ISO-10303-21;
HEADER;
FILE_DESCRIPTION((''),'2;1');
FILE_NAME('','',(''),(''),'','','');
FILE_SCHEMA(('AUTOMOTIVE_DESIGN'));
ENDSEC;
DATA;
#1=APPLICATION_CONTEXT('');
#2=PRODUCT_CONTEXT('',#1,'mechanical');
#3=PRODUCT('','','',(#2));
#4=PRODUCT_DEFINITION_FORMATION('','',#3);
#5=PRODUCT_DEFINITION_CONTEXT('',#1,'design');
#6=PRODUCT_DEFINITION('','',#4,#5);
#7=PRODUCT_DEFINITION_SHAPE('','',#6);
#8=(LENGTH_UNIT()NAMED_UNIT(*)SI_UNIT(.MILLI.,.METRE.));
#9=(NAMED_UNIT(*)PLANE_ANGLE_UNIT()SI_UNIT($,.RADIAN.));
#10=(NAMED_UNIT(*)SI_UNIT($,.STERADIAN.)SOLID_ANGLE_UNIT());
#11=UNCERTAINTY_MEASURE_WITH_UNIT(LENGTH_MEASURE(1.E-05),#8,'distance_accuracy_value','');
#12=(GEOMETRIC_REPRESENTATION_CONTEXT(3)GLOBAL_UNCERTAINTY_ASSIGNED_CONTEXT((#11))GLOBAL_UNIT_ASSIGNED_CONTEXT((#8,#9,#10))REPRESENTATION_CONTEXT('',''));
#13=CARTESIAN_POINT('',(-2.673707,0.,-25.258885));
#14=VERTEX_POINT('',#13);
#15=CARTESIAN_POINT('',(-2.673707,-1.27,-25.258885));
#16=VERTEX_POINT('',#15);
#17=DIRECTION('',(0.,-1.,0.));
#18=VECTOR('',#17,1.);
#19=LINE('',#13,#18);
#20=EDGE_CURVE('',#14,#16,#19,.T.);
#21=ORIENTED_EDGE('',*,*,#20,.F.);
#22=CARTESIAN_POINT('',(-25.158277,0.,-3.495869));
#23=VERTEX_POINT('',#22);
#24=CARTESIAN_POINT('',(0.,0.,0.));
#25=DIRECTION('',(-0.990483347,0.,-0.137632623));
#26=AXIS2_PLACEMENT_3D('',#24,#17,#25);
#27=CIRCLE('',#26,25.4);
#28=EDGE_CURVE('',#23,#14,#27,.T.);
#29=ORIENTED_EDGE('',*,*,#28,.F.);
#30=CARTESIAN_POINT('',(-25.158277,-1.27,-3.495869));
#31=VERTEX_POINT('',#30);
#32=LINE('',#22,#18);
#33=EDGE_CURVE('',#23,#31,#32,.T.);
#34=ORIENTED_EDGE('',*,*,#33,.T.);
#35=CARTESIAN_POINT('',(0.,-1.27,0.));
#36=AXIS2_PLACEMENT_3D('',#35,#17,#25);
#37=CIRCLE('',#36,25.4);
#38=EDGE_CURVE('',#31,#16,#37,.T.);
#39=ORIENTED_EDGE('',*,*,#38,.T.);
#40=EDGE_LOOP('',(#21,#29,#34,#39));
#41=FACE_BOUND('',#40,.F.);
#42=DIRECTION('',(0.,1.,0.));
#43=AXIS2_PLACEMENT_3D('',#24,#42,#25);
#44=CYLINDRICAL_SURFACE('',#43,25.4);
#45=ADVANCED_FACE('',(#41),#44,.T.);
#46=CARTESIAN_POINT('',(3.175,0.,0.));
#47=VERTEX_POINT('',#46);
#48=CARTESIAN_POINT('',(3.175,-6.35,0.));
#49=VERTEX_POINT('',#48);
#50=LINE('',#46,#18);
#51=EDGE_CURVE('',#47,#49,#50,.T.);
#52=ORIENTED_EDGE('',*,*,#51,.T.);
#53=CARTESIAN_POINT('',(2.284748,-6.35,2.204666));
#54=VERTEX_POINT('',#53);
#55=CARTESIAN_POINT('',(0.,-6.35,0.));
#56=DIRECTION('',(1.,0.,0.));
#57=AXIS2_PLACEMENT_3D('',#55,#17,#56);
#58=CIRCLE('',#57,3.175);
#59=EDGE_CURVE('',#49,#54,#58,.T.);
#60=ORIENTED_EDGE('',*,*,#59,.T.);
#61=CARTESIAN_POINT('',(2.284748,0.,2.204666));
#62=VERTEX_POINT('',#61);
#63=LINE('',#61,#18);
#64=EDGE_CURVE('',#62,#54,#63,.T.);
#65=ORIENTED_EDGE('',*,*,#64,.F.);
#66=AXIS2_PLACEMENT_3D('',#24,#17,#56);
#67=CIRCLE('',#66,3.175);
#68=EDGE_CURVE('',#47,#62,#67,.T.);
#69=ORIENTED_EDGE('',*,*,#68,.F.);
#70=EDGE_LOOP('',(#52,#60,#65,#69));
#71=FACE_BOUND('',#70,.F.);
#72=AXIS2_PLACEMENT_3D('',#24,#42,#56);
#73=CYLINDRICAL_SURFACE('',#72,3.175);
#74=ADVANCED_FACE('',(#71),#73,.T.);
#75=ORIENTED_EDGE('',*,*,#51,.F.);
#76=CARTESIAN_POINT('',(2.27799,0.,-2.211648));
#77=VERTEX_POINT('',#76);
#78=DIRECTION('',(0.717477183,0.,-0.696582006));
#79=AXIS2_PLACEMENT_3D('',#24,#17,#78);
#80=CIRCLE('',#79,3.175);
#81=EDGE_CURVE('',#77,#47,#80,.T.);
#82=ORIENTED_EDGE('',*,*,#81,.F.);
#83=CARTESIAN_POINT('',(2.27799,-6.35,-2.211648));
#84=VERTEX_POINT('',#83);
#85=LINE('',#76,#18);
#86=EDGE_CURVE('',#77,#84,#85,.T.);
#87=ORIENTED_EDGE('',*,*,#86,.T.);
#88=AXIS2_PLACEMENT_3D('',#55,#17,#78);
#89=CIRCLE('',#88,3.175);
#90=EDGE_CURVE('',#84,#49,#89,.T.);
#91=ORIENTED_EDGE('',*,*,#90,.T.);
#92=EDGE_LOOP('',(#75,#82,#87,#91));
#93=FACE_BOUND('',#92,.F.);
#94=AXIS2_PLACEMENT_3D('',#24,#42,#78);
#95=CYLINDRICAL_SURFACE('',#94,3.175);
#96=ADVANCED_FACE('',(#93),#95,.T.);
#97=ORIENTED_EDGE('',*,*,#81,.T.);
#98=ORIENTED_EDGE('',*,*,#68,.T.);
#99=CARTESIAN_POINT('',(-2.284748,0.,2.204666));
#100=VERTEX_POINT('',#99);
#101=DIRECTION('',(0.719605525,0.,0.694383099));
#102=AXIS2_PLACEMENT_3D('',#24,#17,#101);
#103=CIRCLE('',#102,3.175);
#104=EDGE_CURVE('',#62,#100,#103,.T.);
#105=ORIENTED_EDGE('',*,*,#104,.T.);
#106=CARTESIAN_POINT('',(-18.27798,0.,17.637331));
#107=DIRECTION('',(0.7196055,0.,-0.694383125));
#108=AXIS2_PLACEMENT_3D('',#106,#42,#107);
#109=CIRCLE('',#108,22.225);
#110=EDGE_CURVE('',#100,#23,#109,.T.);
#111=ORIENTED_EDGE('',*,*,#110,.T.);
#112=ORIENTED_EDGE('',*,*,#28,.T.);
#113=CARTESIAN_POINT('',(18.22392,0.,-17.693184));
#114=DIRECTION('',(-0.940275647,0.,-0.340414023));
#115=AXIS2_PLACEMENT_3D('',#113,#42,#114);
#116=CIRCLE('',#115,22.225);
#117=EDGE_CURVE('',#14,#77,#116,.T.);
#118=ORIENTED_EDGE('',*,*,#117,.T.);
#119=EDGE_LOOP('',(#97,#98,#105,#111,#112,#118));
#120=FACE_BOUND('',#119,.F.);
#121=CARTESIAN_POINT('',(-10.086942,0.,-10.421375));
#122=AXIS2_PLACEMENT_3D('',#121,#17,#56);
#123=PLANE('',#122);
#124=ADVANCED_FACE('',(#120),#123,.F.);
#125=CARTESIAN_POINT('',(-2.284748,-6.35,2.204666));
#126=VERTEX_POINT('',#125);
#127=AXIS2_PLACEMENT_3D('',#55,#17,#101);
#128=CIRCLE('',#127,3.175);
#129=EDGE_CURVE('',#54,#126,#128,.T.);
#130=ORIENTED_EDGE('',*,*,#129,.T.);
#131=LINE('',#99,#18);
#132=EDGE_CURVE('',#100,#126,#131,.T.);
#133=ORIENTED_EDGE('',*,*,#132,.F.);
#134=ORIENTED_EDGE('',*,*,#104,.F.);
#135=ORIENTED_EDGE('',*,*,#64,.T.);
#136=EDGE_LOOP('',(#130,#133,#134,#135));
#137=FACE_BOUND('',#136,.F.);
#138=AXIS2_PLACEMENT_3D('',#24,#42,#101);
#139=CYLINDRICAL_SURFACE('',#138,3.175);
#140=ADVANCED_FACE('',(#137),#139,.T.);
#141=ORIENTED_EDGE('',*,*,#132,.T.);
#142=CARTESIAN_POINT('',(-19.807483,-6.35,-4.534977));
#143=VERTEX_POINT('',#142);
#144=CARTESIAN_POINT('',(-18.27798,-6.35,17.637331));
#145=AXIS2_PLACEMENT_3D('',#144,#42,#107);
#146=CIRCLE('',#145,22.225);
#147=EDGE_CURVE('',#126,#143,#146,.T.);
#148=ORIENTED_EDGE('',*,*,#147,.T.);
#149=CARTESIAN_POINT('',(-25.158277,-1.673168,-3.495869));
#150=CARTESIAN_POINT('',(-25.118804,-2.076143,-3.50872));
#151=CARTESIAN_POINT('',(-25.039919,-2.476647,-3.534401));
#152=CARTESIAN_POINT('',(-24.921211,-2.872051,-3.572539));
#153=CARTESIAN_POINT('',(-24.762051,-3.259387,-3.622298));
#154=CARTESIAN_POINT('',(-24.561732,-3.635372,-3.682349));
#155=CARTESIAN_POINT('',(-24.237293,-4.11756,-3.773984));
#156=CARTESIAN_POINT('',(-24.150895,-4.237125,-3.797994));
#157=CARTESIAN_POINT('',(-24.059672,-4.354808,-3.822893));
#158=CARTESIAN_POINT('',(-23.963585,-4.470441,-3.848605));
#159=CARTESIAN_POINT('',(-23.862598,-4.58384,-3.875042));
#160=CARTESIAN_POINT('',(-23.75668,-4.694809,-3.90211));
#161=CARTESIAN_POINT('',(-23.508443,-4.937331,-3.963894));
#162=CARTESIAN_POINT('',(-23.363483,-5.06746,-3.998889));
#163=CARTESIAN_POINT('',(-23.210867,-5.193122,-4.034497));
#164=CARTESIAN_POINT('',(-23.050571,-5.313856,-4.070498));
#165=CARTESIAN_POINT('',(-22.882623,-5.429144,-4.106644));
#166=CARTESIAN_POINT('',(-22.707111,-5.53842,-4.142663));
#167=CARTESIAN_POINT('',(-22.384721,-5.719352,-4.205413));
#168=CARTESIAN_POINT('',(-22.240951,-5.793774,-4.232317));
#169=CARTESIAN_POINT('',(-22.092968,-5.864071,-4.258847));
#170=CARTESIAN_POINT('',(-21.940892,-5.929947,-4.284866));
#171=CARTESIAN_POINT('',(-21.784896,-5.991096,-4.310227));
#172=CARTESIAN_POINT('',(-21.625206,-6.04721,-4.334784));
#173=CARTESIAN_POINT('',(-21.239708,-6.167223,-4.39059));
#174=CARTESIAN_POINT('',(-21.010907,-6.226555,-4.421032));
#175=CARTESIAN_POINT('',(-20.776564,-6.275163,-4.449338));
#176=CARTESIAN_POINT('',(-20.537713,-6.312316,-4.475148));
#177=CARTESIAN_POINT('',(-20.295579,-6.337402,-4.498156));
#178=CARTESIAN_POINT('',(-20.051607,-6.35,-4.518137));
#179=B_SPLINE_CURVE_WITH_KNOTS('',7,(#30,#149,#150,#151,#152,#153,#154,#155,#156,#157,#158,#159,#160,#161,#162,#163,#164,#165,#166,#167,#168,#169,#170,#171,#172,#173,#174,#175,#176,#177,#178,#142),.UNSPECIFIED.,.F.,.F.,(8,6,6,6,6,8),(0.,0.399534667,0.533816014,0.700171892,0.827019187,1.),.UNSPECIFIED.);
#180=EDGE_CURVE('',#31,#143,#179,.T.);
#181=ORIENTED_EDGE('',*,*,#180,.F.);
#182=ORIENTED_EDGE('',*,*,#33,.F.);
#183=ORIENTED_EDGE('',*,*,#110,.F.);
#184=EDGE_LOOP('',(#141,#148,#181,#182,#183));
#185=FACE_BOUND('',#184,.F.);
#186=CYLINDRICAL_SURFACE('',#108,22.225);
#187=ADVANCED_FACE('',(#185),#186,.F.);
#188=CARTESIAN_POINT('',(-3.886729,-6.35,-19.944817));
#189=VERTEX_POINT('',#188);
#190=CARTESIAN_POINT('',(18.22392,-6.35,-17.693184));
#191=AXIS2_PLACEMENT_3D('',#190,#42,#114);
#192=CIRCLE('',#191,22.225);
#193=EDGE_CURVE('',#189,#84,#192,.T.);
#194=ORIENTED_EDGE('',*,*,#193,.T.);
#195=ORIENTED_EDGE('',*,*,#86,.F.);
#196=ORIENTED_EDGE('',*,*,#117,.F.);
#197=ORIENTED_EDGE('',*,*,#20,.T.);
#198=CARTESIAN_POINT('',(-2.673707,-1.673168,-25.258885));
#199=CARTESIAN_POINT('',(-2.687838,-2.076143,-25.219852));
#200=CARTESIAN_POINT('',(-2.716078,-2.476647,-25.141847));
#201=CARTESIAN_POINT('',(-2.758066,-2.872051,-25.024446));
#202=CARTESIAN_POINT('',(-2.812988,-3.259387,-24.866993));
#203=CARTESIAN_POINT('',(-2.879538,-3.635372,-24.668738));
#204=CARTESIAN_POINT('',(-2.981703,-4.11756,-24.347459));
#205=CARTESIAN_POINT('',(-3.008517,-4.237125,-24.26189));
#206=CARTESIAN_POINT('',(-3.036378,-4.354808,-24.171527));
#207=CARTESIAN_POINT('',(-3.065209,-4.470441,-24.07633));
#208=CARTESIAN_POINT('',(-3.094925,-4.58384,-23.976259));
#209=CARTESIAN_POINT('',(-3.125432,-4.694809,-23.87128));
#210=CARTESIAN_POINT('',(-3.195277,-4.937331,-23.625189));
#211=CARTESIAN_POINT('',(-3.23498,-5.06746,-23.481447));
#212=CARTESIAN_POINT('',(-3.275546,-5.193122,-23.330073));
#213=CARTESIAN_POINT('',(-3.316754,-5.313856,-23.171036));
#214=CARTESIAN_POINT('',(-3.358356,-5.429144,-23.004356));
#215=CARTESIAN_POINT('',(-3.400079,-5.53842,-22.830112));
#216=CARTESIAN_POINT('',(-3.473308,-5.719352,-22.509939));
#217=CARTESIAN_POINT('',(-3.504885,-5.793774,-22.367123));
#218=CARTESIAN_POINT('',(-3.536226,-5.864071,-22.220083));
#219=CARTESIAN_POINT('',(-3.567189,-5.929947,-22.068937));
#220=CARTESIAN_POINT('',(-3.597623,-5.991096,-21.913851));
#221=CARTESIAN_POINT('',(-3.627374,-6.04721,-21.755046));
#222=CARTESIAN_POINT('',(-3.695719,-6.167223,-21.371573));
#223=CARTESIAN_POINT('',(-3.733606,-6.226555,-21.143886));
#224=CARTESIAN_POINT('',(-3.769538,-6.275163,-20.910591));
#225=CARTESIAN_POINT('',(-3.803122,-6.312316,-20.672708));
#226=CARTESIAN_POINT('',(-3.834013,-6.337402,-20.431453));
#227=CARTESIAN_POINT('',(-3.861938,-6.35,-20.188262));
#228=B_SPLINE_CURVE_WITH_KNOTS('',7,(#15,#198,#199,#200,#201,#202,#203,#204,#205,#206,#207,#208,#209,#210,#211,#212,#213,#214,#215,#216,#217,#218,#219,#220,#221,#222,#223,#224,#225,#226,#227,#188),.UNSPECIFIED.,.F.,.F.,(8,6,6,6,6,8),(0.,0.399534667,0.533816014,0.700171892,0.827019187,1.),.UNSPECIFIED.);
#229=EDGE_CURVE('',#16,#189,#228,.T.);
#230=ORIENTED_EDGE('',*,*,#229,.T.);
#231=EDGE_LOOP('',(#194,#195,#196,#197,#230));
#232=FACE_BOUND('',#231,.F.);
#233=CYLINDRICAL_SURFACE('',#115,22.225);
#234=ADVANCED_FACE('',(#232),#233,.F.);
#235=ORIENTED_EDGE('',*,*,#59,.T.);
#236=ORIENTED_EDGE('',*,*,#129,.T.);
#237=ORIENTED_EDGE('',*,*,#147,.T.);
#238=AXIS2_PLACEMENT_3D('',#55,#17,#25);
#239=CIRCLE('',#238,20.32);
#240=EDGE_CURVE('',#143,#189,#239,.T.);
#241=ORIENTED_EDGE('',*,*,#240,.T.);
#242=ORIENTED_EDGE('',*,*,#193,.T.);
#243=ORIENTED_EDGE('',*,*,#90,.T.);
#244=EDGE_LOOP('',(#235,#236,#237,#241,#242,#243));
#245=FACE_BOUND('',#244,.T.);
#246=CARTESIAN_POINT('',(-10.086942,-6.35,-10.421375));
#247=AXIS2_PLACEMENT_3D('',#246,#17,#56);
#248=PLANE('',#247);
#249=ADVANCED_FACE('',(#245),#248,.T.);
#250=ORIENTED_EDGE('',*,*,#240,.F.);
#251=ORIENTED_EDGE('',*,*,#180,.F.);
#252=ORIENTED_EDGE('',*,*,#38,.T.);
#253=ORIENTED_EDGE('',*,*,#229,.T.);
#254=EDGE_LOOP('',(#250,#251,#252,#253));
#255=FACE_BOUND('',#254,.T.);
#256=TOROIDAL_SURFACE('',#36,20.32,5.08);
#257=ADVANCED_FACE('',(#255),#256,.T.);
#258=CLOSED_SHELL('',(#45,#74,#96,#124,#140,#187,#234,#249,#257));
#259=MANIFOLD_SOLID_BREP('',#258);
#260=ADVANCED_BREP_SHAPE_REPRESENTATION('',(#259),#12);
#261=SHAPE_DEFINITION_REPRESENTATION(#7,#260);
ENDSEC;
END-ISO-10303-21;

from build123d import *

# Parameters (mm, degrees)
F1_DEPTH = 6.35
F2_R     = 5.08


with BuildPart() as f1:
    # F0 (on Front) → F1 (new body)
    with BuildSketch(Plane.XZ):
        with BuildLine():
            ThreePointArc((-25.1582770203, -3.4958686142), (-17.6652781796, -18.2509711204), (-2.6737065925, -25.2588854279))
            ThreePointArc((-2.6737065925, -25.2588854279), (-3.505224173, -13.0246794199), (2.277990057, -2.2116478698))
            ThreePointArc((2.277990057, -2.2116478698), (-2.2081596575, -2.2813715013), (-2.2847476043, 2.2046662752))
            ThreePointArc((-2.2847476043, 2.2046662752), (-12.90346397, -3.9280392538), (-25.1582770203, -3.4958686142))
        make_face()
        with BuildLine():
            ThreePointArc((-2.2847476043, 2.2046662752), (-2.2081596575, -2.2813715013), (2.277990057, -2.2116478698))
            ThreePointArc((2.277990057, -2.2116478698), (2.942213744, -1.1933160874), (3.175, 0))
            ThreePointArc((3.175, 0), (2.9440362131, 1.1888127589), (2.2847475428, 2.2046663389))
            ThreePointArc((2.2847475428, 2.2046663389), (-4.43e-08, 3.175), (-2.2847476043, 2.2046662752))
        make_face()
    extrude(amount=F1_DEPTH)

    # F2
    f2_edges = [f1.edges().sort_by_distance(p)[0] for p in [
        (-17.665278, -6.35, -18.250971),
    ]]
    fillet(f2_edges, radius=F2_R)


solid = f1.part
